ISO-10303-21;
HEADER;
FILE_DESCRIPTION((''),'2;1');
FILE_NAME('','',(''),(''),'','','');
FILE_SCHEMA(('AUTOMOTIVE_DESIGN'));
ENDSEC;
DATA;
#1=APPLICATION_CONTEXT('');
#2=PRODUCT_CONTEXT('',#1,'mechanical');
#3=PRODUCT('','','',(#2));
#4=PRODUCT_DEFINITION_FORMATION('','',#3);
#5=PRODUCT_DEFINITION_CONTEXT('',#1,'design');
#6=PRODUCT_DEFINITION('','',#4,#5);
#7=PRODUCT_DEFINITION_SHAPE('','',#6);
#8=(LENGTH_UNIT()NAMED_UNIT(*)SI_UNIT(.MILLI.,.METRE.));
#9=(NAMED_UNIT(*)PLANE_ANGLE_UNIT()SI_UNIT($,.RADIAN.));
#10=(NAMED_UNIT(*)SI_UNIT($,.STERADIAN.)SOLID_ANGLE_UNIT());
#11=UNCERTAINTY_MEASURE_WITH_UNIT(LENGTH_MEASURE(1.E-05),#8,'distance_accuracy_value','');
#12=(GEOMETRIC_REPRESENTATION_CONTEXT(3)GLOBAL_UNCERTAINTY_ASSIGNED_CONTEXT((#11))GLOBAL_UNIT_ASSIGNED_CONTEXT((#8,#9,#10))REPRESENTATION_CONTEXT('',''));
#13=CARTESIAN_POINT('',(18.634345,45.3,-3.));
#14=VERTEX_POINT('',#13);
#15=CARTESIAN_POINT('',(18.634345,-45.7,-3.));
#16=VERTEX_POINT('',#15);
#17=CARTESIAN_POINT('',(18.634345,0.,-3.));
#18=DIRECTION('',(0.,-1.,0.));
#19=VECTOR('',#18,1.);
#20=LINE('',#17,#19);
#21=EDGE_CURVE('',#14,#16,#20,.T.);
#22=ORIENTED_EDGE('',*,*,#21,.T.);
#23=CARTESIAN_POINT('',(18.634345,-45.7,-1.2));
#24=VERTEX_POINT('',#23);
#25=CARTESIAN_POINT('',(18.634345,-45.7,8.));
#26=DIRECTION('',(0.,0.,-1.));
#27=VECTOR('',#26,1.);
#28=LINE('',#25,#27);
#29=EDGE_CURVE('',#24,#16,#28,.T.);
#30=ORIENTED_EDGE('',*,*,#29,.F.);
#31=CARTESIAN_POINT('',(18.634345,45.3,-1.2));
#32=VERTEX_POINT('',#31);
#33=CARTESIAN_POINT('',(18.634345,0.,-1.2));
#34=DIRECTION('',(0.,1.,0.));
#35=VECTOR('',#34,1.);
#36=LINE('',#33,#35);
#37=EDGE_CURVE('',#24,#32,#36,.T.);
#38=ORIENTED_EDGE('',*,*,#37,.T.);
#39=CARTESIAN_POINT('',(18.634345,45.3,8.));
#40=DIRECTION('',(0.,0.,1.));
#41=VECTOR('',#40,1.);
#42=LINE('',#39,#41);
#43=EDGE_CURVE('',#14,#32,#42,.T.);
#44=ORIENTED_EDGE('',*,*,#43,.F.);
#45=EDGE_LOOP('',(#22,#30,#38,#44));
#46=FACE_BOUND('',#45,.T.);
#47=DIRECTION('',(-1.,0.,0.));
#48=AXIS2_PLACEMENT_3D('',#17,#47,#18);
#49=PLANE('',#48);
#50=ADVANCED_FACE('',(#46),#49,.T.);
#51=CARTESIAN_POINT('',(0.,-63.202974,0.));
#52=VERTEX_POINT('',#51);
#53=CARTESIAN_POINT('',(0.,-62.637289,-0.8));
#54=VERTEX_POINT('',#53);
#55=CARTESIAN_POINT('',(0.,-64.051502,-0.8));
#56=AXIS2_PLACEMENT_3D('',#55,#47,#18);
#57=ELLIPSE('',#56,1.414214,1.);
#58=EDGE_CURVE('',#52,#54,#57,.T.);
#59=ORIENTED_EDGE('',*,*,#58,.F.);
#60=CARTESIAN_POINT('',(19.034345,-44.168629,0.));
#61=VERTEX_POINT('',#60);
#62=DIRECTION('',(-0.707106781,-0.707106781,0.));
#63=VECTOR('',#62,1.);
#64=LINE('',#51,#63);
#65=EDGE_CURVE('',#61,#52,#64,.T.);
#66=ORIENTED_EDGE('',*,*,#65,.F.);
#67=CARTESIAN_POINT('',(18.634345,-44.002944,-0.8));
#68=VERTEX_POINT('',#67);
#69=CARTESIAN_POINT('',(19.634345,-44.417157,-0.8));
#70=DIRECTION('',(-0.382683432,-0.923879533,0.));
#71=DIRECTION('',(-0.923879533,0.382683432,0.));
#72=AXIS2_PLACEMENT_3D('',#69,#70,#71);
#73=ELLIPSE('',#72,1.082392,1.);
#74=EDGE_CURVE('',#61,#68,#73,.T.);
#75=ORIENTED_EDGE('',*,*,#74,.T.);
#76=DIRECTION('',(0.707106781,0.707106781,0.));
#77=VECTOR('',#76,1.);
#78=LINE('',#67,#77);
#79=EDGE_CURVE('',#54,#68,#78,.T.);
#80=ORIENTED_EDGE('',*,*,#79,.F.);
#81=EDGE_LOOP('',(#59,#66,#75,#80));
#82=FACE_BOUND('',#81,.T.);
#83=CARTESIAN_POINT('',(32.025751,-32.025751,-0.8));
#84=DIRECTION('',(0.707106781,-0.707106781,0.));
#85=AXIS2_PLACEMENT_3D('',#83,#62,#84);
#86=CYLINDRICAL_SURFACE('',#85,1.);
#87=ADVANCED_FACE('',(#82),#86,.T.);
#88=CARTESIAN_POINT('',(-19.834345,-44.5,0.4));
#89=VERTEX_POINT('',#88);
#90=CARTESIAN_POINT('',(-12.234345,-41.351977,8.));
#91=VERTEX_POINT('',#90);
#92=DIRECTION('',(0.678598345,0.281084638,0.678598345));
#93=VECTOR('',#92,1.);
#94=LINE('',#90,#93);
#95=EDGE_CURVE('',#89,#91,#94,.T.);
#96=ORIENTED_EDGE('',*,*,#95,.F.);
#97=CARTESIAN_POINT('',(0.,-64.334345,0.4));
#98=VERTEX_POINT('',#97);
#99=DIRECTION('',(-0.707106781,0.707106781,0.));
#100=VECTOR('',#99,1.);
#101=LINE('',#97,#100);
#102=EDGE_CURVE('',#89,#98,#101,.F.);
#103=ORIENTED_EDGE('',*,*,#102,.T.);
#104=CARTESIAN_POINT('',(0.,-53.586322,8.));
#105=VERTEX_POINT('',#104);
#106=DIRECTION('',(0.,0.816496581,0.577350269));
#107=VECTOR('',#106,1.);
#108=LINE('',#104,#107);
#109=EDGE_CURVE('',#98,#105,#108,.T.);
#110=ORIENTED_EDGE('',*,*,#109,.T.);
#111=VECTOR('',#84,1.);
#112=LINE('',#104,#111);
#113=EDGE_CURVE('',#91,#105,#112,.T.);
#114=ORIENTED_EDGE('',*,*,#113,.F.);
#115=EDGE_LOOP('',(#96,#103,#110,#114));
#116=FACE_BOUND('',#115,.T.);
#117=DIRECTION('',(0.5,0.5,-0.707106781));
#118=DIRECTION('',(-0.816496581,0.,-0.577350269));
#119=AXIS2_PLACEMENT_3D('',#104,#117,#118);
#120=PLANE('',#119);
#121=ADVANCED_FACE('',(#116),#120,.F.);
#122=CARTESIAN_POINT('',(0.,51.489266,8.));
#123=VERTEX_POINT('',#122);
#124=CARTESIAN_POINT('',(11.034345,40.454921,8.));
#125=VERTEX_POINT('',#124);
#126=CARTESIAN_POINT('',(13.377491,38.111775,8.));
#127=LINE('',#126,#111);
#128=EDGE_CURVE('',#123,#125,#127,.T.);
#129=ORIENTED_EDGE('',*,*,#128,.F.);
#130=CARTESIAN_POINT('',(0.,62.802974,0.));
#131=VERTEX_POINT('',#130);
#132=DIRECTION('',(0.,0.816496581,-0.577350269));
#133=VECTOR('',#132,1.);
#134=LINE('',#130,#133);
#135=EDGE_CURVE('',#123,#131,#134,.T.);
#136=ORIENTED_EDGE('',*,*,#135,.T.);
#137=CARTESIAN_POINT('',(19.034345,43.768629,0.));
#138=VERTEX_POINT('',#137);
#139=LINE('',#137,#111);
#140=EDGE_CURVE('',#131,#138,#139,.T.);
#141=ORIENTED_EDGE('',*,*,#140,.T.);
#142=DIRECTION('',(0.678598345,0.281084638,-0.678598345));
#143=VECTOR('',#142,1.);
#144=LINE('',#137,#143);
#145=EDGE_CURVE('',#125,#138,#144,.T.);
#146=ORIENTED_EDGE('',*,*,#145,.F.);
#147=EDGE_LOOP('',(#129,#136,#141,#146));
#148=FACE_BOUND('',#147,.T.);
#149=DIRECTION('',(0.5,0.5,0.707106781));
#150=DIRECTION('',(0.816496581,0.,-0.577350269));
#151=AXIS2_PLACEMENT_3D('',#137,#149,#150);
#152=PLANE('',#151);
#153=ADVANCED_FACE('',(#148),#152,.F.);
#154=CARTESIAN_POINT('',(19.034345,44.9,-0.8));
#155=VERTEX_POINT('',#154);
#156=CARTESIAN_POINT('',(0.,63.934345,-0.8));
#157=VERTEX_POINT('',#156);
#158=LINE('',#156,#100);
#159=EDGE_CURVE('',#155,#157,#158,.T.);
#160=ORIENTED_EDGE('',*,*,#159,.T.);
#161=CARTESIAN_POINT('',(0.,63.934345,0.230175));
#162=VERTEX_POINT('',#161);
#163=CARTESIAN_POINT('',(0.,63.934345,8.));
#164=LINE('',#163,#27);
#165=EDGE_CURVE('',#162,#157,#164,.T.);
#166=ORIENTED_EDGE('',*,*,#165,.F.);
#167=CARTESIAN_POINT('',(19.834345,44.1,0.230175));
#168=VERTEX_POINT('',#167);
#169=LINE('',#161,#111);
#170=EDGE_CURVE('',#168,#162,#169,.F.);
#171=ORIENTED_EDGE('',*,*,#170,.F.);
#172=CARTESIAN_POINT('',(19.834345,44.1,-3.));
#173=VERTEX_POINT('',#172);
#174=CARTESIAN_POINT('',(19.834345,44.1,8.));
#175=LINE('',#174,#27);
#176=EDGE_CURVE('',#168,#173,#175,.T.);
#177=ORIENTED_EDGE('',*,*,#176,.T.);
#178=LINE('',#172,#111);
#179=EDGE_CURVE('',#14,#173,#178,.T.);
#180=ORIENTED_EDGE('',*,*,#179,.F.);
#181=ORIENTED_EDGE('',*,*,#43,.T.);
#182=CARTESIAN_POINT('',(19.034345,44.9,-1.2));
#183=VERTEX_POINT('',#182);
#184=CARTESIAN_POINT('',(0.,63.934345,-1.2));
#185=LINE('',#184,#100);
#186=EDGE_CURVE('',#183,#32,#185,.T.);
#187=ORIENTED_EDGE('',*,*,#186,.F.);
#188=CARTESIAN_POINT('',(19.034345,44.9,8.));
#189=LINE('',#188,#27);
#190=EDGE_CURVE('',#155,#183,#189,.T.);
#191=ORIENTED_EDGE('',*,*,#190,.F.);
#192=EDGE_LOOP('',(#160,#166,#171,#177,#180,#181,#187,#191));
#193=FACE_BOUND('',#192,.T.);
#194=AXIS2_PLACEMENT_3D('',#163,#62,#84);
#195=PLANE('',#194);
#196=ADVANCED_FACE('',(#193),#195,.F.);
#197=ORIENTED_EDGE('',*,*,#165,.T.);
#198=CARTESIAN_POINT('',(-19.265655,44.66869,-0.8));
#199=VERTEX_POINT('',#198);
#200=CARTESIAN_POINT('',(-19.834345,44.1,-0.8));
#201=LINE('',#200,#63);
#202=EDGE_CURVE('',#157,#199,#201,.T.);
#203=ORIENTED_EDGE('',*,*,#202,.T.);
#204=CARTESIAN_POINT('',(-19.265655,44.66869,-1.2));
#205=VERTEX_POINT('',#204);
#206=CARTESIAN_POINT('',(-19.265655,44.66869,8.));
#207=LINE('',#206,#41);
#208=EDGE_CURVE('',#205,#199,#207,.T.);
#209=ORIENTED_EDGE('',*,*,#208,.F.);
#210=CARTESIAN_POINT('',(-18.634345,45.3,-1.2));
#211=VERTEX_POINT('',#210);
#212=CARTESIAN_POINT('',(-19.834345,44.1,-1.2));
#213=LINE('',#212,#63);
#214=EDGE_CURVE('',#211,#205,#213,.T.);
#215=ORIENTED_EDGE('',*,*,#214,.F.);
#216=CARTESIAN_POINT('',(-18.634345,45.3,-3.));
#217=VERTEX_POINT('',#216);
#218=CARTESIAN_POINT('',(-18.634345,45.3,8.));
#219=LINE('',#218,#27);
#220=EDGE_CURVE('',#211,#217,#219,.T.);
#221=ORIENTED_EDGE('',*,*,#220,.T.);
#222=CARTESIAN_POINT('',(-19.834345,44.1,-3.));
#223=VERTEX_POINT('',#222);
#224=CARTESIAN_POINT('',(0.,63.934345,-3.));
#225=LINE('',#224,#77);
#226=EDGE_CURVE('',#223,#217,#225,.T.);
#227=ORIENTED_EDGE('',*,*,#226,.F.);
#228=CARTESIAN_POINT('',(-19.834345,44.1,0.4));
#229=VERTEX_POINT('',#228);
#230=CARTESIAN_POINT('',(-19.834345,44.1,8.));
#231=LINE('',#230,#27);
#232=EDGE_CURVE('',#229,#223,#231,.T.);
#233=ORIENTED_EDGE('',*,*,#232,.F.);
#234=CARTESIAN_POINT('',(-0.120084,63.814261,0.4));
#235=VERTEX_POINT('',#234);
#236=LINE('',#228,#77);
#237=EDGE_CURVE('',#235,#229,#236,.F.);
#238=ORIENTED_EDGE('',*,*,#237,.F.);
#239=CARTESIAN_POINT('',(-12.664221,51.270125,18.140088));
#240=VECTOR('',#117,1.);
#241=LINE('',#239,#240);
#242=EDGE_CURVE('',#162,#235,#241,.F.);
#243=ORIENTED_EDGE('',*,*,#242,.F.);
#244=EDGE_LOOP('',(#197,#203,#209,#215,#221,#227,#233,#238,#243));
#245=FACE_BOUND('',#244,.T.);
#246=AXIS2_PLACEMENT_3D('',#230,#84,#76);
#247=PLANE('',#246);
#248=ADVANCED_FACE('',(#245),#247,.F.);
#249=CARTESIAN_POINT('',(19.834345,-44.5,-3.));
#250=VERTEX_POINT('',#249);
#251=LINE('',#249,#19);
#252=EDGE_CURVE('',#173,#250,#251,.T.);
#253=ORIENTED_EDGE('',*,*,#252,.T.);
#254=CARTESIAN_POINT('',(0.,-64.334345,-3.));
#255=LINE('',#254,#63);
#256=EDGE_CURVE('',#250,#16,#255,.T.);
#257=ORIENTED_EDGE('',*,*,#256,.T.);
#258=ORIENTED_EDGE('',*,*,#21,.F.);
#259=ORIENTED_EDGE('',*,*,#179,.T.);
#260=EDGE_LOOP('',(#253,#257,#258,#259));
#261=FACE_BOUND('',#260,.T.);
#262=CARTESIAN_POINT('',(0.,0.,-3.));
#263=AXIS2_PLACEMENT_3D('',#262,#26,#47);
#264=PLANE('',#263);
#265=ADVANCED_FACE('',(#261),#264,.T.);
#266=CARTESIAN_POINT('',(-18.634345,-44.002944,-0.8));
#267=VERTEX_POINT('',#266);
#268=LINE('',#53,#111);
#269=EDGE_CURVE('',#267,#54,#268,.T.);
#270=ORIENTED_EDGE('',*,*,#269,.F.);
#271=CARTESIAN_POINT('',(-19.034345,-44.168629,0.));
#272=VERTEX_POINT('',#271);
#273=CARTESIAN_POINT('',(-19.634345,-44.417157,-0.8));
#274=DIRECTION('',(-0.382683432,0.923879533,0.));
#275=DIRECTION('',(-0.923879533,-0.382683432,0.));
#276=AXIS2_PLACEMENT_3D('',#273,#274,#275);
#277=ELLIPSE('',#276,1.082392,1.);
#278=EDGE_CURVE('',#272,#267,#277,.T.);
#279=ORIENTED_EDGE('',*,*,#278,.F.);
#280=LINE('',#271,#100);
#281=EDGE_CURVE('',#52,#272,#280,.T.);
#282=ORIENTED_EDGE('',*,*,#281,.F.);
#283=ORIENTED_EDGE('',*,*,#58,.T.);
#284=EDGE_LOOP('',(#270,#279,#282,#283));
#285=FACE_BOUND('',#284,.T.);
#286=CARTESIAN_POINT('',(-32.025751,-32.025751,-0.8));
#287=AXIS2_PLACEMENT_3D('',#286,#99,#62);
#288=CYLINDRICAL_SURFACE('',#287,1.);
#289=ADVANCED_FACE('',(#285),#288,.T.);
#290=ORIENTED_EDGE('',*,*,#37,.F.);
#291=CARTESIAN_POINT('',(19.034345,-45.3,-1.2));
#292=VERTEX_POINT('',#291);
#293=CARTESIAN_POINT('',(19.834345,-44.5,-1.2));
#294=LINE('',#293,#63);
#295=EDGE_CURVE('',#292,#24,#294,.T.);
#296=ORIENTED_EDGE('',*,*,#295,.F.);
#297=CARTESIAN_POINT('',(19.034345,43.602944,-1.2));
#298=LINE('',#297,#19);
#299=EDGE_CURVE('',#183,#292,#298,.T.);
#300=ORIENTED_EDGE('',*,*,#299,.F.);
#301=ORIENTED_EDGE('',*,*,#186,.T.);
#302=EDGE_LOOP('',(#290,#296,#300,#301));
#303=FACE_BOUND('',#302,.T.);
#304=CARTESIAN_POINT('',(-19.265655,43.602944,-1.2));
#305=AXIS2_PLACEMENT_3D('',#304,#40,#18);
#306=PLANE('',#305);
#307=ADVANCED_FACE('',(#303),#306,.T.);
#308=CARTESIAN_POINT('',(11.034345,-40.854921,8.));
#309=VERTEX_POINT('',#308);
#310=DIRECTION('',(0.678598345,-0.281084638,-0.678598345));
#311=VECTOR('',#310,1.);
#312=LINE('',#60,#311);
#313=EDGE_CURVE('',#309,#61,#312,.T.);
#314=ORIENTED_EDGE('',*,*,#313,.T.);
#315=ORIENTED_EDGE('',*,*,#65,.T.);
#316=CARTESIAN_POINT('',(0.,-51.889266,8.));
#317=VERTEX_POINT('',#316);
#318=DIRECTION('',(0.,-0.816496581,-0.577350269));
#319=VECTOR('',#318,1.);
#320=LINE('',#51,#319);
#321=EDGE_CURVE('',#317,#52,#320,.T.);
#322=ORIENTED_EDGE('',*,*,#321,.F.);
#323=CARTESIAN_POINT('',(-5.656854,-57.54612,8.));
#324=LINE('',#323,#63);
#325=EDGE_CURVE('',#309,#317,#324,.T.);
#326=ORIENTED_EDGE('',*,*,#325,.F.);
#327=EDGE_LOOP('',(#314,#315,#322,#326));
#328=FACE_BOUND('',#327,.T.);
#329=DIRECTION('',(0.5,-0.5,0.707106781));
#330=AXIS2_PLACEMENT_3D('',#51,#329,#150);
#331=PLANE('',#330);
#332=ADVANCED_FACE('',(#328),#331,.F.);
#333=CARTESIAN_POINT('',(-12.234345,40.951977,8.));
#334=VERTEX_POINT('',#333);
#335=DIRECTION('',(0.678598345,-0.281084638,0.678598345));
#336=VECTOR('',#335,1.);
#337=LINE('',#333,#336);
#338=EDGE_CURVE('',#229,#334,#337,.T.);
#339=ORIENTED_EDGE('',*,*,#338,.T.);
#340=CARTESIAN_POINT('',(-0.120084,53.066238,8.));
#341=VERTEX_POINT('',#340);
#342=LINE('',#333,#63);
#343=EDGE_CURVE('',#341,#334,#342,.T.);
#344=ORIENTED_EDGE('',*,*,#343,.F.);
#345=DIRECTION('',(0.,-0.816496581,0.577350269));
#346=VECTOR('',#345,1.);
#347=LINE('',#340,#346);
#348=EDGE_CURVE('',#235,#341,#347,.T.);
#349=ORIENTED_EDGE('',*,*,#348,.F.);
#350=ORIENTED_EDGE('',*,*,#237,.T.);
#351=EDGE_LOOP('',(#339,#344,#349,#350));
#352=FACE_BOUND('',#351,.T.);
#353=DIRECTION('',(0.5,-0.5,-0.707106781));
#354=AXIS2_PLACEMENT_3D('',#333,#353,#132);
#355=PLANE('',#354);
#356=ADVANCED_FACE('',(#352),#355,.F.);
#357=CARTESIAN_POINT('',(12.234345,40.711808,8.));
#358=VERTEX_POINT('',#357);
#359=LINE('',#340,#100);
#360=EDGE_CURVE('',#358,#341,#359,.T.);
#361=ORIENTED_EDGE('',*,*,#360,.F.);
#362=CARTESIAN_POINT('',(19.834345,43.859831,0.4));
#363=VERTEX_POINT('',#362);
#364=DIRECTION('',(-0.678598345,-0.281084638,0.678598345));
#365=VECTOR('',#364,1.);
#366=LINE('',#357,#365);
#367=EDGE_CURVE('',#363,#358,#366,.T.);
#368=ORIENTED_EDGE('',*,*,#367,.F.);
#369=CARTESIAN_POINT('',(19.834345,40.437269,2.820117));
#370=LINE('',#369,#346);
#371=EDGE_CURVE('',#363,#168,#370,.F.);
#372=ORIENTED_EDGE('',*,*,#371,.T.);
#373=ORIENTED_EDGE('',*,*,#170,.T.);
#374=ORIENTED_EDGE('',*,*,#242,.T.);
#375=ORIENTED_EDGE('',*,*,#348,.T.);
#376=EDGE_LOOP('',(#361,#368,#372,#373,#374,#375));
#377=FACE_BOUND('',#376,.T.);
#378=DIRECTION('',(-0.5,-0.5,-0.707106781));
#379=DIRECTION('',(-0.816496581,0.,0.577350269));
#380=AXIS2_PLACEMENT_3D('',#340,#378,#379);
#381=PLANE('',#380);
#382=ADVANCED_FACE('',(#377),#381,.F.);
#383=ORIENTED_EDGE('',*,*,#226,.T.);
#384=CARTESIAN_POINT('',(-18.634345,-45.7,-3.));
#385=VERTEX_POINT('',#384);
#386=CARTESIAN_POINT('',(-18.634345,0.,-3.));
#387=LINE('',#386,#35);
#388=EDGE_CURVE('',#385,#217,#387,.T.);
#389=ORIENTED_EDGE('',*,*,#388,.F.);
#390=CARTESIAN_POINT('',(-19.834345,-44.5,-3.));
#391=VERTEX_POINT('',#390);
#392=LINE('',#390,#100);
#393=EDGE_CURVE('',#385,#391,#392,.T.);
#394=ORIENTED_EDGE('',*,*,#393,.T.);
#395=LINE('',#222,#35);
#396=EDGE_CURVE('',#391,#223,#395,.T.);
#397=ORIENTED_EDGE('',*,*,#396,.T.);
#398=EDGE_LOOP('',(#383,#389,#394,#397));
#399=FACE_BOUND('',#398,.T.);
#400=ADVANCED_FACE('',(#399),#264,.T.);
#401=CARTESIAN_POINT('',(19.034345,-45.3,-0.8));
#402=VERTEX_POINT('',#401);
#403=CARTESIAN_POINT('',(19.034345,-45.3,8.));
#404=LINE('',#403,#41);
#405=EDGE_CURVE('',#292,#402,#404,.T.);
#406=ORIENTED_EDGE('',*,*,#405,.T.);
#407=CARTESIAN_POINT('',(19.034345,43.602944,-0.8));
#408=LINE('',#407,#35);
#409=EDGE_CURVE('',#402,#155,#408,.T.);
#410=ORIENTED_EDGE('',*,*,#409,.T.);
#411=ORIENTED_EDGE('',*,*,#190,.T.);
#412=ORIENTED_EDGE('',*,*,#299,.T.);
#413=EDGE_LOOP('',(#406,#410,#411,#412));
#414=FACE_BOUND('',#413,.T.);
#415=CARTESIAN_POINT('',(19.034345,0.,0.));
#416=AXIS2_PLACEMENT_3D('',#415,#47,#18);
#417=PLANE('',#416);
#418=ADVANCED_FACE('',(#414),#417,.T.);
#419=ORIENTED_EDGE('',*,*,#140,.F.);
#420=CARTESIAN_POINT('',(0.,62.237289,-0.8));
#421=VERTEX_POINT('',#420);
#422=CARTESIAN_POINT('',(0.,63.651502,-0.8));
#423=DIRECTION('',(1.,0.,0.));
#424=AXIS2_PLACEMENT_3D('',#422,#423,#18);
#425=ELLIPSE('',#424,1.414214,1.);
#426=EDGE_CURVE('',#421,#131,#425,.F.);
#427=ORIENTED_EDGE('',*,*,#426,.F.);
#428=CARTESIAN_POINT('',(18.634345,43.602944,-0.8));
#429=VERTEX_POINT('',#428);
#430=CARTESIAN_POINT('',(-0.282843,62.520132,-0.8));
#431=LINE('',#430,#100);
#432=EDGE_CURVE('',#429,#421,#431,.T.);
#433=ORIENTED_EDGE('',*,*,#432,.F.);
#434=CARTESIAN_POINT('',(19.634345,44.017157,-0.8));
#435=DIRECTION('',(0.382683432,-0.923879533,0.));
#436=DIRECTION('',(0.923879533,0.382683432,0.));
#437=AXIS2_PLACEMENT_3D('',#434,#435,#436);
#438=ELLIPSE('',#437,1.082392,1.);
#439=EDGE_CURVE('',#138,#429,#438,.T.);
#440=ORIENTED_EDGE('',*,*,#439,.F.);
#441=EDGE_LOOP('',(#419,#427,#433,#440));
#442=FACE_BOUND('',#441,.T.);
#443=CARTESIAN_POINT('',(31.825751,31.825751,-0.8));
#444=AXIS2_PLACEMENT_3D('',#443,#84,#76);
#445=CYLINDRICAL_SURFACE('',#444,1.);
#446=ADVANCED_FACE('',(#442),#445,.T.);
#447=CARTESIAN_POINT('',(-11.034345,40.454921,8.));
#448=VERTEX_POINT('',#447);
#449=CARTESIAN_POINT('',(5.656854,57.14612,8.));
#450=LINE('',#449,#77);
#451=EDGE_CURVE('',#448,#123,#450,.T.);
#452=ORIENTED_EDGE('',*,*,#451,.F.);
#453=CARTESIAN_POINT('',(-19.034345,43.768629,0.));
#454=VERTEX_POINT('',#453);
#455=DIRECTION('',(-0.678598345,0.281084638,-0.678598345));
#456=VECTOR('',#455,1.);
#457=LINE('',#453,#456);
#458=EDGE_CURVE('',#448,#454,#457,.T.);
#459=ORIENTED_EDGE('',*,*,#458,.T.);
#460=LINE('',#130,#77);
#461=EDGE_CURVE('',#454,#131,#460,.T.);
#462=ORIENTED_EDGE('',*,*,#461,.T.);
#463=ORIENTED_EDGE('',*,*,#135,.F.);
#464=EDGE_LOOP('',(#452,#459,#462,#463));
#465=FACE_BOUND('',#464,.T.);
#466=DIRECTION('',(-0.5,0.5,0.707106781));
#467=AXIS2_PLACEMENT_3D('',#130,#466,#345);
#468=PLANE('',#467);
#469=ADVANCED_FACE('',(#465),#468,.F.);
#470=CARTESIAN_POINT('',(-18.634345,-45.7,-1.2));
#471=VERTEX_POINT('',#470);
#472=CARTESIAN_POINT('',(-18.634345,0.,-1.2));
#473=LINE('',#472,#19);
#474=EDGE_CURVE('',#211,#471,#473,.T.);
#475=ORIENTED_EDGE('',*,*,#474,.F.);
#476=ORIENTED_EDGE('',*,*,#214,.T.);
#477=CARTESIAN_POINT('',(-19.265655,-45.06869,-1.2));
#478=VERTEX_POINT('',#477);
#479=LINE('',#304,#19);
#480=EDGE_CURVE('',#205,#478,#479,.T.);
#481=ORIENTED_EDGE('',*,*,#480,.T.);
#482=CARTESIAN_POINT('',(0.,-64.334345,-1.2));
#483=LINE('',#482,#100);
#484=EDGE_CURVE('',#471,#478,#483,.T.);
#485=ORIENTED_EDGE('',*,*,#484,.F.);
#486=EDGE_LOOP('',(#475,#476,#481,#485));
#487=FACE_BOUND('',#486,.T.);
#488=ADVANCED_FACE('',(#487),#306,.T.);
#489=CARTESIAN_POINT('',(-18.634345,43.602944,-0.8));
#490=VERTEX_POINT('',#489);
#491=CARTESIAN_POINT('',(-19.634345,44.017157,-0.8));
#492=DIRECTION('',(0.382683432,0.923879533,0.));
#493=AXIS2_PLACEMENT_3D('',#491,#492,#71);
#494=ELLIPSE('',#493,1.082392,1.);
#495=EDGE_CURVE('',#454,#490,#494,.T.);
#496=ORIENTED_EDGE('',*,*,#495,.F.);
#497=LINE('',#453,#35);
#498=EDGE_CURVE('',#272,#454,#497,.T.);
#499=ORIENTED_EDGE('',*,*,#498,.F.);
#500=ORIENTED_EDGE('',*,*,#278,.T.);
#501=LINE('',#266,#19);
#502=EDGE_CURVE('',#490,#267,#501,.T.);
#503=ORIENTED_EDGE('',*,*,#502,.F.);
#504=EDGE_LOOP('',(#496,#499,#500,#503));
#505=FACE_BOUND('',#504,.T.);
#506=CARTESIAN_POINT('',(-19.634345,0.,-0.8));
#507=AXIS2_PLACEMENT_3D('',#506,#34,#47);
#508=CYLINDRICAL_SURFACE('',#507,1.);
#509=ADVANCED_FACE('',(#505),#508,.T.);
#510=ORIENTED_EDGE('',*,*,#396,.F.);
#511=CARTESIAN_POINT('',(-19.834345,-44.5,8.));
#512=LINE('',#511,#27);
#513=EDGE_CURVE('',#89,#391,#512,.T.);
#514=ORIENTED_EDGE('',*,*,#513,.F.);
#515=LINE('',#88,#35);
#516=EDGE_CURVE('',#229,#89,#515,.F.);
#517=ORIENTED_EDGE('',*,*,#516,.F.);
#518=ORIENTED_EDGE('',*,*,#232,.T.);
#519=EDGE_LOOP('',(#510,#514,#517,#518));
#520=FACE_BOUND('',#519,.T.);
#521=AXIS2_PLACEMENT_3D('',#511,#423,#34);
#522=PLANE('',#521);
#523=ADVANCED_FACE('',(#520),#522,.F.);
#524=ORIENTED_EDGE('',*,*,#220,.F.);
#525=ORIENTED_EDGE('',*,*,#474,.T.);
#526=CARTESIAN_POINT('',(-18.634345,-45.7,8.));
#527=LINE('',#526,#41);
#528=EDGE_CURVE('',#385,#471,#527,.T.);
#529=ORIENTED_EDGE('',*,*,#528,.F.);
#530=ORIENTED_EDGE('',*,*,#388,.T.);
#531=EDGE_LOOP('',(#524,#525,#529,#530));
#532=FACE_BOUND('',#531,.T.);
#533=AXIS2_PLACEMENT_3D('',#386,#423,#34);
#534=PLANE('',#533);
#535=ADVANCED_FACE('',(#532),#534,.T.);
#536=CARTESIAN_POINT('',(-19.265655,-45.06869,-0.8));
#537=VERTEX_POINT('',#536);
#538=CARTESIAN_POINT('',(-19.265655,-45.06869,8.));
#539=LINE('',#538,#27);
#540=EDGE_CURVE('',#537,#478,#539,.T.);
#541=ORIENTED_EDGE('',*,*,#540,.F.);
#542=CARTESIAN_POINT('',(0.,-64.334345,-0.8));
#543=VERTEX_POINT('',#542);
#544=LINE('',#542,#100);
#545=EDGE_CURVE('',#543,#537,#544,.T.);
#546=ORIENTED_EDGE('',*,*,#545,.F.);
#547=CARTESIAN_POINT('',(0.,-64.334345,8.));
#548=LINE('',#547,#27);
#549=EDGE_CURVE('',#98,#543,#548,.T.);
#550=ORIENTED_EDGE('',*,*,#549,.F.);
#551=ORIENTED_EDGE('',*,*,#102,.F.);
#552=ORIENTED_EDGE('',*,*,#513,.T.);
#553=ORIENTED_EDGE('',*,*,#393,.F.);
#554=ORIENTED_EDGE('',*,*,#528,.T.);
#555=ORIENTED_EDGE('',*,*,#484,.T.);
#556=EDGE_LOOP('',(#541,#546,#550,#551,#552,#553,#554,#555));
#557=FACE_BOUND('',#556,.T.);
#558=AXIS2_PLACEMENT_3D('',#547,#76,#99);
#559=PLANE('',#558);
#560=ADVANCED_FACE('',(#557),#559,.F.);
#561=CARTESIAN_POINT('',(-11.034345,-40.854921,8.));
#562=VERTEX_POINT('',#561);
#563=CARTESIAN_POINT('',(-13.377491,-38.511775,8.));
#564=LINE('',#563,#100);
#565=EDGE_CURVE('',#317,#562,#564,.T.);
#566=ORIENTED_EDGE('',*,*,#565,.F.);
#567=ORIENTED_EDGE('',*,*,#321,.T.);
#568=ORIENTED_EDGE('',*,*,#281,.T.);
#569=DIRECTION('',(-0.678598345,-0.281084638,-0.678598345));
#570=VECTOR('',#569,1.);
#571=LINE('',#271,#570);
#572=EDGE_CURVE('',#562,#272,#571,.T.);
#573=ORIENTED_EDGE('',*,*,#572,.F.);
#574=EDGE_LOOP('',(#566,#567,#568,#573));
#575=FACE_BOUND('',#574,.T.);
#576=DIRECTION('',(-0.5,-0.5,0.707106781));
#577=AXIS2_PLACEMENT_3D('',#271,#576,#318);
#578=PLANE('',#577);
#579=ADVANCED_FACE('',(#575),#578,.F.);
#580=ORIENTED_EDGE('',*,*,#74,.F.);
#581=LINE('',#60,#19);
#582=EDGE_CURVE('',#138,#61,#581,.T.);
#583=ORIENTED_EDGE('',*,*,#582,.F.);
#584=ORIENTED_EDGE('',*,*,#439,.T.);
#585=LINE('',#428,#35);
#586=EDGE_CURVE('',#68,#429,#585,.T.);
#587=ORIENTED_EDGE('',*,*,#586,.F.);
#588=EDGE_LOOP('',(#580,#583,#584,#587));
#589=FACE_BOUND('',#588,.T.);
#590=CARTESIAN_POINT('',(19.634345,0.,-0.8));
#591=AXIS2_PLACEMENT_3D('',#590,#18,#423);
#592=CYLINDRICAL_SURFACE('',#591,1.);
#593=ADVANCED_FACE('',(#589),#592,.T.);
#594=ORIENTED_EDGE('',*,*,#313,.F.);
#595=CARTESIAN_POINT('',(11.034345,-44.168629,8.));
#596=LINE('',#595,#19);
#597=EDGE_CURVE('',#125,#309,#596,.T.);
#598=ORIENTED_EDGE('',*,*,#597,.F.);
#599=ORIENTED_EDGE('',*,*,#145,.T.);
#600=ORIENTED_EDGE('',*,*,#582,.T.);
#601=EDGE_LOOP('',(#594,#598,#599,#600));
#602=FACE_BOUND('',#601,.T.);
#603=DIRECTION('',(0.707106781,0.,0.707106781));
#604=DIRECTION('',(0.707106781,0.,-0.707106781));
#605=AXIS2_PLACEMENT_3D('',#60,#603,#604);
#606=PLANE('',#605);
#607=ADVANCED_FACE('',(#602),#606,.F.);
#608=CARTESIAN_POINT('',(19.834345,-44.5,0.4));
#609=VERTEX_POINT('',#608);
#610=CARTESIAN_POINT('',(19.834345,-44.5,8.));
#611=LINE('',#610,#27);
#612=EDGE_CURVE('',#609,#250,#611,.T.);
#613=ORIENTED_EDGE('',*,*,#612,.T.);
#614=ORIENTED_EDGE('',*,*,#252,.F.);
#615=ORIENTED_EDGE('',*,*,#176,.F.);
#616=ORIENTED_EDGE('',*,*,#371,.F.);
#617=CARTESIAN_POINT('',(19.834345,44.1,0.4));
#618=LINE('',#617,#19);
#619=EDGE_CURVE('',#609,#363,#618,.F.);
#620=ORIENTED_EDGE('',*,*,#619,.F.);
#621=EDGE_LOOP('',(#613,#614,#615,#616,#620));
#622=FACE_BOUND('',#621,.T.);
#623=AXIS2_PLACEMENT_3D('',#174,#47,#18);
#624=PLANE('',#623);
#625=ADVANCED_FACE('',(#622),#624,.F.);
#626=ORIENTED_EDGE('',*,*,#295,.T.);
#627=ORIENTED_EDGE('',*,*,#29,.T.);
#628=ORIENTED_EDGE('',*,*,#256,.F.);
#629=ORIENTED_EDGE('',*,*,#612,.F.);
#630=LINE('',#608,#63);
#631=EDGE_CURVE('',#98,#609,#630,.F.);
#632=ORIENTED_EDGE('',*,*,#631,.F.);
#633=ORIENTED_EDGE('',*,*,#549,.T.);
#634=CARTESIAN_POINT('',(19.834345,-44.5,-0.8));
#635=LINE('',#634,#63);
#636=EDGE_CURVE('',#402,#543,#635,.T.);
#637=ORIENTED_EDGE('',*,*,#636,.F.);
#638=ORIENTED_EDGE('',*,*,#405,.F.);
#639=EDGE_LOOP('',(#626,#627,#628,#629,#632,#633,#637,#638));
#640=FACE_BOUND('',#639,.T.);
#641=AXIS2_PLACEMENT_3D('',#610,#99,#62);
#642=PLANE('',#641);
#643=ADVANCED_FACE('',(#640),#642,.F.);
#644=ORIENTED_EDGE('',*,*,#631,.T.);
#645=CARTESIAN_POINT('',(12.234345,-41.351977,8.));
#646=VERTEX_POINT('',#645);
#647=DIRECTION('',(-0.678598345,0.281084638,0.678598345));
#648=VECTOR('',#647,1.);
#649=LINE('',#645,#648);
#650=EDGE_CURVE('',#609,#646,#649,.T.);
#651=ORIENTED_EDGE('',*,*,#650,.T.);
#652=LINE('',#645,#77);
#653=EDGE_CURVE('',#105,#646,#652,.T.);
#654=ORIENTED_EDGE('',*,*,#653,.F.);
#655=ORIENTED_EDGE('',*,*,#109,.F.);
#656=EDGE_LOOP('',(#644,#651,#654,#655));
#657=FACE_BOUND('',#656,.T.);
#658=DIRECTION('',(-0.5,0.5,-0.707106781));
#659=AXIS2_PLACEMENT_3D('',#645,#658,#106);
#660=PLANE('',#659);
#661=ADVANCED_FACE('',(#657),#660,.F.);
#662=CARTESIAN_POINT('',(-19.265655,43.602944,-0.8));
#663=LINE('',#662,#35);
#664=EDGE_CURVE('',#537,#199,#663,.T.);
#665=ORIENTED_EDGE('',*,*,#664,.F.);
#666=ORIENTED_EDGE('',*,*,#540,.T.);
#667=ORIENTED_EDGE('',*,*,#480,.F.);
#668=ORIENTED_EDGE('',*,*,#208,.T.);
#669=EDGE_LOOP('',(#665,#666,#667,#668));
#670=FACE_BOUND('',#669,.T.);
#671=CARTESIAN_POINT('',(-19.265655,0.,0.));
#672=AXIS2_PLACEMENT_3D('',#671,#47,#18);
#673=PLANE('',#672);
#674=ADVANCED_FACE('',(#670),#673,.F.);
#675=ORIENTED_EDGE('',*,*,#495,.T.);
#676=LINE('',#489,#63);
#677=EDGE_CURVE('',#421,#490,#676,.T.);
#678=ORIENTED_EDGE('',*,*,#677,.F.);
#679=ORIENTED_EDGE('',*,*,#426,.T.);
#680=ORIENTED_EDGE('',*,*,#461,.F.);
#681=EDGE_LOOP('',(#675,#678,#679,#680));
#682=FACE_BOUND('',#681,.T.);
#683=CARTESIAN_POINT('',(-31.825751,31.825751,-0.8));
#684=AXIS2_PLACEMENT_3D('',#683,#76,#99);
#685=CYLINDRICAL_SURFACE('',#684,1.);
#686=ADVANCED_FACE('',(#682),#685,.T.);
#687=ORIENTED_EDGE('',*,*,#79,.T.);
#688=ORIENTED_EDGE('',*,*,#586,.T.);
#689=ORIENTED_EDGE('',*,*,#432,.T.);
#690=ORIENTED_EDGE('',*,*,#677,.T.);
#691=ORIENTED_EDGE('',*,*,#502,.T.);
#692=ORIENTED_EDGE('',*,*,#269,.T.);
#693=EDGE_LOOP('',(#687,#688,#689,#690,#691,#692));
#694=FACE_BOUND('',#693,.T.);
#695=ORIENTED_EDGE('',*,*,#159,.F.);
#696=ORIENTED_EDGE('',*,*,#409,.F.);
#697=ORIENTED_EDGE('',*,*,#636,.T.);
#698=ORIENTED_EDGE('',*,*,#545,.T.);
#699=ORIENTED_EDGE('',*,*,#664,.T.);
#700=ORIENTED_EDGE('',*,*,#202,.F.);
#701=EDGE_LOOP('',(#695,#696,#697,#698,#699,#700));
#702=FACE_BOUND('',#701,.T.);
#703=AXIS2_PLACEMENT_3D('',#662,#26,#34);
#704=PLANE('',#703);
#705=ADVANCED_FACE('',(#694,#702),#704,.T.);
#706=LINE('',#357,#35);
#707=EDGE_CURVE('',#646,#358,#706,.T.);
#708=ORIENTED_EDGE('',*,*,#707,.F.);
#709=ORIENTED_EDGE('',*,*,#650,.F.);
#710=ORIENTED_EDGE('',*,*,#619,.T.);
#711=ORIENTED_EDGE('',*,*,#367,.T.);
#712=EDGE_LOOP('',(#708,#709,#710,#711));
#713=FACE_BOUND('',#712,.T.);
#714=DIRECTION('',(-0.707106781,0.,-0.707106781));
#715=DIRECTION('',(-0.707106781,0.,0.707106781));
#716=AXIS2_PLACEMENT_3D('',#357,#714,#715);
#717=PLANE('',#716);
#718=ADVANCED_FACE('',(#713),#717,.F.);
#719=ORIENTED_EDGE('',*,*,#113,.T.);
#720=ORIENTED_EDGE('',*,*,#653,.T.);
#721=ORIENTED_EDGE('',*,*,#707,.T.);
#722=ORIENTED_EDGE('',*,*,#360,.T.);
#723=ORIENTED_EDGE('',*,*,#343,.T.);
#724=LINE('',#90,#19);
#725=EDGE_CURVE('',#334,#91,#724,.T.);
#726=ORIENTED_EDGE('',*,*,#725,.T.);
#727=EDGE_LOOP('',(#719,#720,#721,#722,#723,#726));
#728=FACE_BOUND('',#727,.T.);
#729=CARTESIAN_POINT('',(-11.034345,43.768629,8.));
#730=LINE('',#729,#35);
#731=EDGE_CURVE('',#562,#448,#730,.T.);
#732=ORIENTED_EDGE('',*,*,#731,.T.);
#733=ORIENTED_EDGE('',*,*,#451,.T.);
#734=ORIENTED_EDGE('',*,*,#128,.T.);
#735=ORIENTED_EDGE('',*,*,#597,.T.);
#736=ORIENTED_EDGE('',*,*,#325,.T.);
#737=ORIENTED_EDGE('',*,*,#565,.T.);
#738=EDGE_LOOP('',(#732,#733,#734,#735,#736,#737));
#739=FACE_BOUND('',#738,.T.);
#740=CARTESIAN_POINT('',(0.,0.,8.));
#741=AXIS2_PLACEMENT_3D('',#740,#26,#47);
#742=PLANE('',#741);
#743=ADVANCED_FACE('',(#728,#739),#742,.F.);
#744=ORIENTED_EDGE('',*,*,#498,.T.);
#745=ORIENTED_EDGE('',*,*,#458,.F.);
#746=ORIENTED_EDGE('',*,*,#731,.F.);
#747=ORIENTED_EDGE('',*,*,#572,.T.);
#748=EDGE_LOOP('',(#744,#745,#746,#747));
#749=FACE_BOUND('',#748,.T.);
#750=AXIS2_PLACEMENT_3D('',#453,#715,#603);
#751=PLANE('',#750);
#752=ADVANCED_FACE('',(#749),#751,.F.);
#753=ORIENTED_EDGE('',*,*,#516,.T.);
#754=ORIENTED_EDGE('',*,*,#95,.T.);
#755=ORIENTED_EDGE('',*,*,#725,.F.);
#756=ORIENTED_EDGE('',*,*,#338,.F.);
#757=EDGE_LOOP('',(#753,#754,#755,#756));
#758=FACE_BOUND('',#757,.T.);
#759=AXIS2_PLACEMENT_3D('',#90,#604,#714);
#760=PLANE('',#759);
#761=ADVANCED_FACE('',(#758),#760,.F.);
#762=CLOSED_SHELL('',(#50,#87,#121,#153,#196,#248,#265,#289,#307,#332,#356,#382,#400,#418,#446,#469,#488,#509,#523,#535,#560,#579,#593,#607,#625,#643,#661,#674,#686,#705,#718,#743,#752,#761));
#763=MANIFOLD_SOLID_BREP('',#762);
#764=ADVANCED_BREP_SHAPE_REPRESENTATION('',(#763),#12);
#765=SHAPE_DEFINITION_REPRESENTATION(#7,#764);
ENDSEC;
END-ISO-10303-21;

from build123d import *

# Parameters (mm, degrees)
EXTRUDE_2_DEPTH          = 8
CUT_EXTRUDE_1_DEPTH      = 8
CUT_EXTRUDE_1_DRAFT      = -45
SKETCH_3_OUTSIDE_W       = 84.568
SKETCH_3_OUTSIDE_H       = 173.168
CUT_EXTRUDE_5_DEPTH      = 8
CUT_EXTRUDE_5_DRAFT      = -45
EXTRUDE_1_DEPTH          = 3
FILLET_1_R               = 1
FILLET_2_R               = 1
CUT_EXTRUDE_6_DEPTH      = 37.9
CUT_EXTRUDE_6_DEPTH_BACK = 0.4
SKETCH_5_W               = 0.4
SKETCH_5_H               = 87.60588745
SKETCH_7_W               = 38.3
SKETCH_7_H               = 22.901916238
CUT_EXTRUDE_8_DEPTH      = 0.4
SKETCH_8_W               = 38.3
SKETCH_8_H               = 25.571304525
CUT_EXTRUDE_9_DEPTH      = 0.4
SKETCH_9_W               = 37.268690424
SKETCH_9_H               = 136.16118074
CUT_EXTRUDE_10_DEPTH     = 1.8


with BuildPart() as part:
    # Skizze1 → Бобышка-Вытянуть2 (new body)
    with BuildSketch(Plane.XY):
        Polygon((-19.834345212, 44.1), (0, 63.934345212), (19.834345212, 44.1), (19.834345212, -44.5), (0, -64.334345212), (-19.834345212, -44.5), align=None)
    extrude(amount=EXTRUDE_2_DEPTH)


with BuildPart() as cut_extrude_1_tool:
    # Эскиз1 → Вырез-Вытянуть1 (with draft: the straight prism first)
    with BuildSketch(Plane(origin=(0, 0, 0), x_dir=(-1, 0, 0), z_dir=(0, 0, -1))):
        Polygon((0, 62.802974362), (-19.034345212, 43.76862915), (-19.034345212, -44.16862915), (0, -63.202974362), (19.034345212, -44.16862915), (19.034345212, 43.76862915), align=None)
    extrude(amount=-CUT_EXTRUDE_1_DEPTH)
    # Вырез-Вытянуть1: the draft: its side faces are tilted about the plane it starts from
    cut_extrude_1_sides = [cut_extrude_1_tool.faces().sort_by_distance(p)[0] for p in [
        (9.517172606, 53.285801756, 4),
        (19.034345212, -0.2, 4),
        (9.517172606, -53.685801756, 4),
        (-9.517172606, -53.685801756, 4),
        (-19.034345212, -0.2, 4),
        (-9.517172606, 53.285801756, 4),
    ]]
    draft(cut_extrude_1_sides, Plane(origin=(0, 0, 0), x_dir=(-1, 0, 0), z_dir=(0, 0, -1)), CUT_EXTRUDE_1_DRAFT)


with BuildPart() as part_1:
    add(part.part)

    # Вырез-Вытянуть1: cut by cut_extrude_1_tool
    add(cut_extrude_1_tool.part, mode=Mode.SUBTRACT)


with BuildPart() as cut_extrude_5_tool:
    # Эскиз3 outside → Вырез-Вытянуть5 (with draft: the straight prism first)
    with BuildSketch(Plane.XY.offset(8)):
        with Locations((0, -0.2)):
            Rectangle(SKETCH_3_OUTSIDE_W, SKETCH_3_OUTSIDE_H)
        Polygon((-12.234345212, 40.951976926), (-12.234345212, -41.351976926), (0, -53.586322138), (12.234345212, -41.351976926), (12.234345212, 40.711808204), (-0.120084361, 53.066237777), align=None, mode=Mode.SUBTRACT)
    extrude(amount=-CUT_EXTRUDE_5_DEPTH)
    # Вырез-Вытянуть5: the draft: its side faces are tilted about the plane it starts from
    cut_extrude_5_sides = [cut_extrude_5_tool.faces().sort_by_distance(p)[0] for p in [
        (0, -86.784, 4),
        (42.284, -0.2, 4),
        (0, 86.384, 4),
        (-42.284, -0.2, 4),
        (-6.177214787, 47.009107352, 4),
        (6.057130426, 46.889022991, 4),
        (12.234345212, -0.320084361, 4),
        (6.117172606, -47.469149532, 4),
        (-6.117172606, -47.469149532, 4),
        (-12.234345212, -0.2, 4),
    ]]
    draft(cut_extrude_5_sides, Plane.XY.offset(8), CUT_EXTRUDE_5_DRAFT)


with BuildPart() as part_2:
    add(part_1.part)

    # Вырез-Вытянуть5: cut by cut_extrude_5_tool
    add(cut_extrude_5_tool.part, mode=Mode.SUBTRACT)

    # Эскиз4 → Вытянуть-Тонкостенный1 (add)
    with BuildSketch(Plane(origin=(0, 0, 0), x_dir=(-1, 0, 0), z_dir=(0, 0, -1))):
        Polygon((19.834345212, 44.1), (19.834345212, -44.5), (0, -64.334345212), (-19.834345212, -44.5), (-19.834345212, 44.1), (0, 63.934345212), align=None)
        Polygon((18.634345212, 43.602943725), (18.634345212, -44.002943725), (0, -62.637288937), (-18.634345212, -44.002943725), (-18.634345212, 43.602943725), (0, 62.237288937), align=None, mode=Mode.SUBTRACT)
    extrude(amount=EXTRUDE_1_DEPTH)

    # Скругление1
    # the kernel refuses this fillet: 1 mm, written as the material it takes off along each edge
    with BuildSketch(Plane(origin=(-18.634345212, 45.602943725, 0), x_dir=(-1, 0, 0), z_dir=(0, -1, 0))) as fillet_1_piece_1_section:
        with BuildLine():
            CenterArc((1, 0.8), FILLET_1_R, 180, 53.130102354)
            Line((0, 0.8), (-0.02, 0.8))
            Line((-0.02, 0.8), (-0.02, 0))
            Line((-0.02, 0), (0, -0.02))
            ThreePointArc((0, -0.02), (0.2, -0.02), (0.388, -0.016))
            Line((0.388, -0.016), (0.4, 0))
        make_face()
    fillet_1_piece_1 = extrude(amount=91.60588745, mode=Mode.PRIVATE)
    fillet_1_piece_1 = split(fillet_1_piece_1, bisect_by=Plane(origin=(-18.834345212, 45.602943725, 0.2), z_dir=(0.7071067811865462, 0, -0.7071067811865488)), keep=Keep.TOP, mode=Mode.PRIVATE)
    fillet_1_piece_1 = split(fillet_1_piece_1, bisect_by=Plane(origin=(-63.437288937, 0.8, 0), z_dir=(0.7071067811865476, 0.7071067811865476, 0)), keep=Keep.TOP, mode=Mode.PRIVATE)
    fillet_1_piece_1 = split(fillet_1_piece_1, bisect_by=Plane(origin=(-17.634345212, 44.602943725, 0), z_dir=(0.7071067811865469, -0.7071067811865481, 0)), keep=Keep.TOP, mode=Mode.PRIVATE)
    add(fillet_1_piece_1, mode=Mode.SUBTRACT)
    with BuildSketch(Plane(origin=(0, 62.237288937, 0), x_dir=(-0.7071067811865469, 0.7071067811865482, 0), z_dir=(-0.7071067811865481, -0.7071067811865469, 0))) as fillet_1_piece_2_section:
        with BuildLine():
            CenterArc((1, 0.8), FILLET_1_R, 180, 53.130102354)
            Line((0, 0.8), (-0.02, 0.8))
            Line((-0.02, 0.8), (-0.02, 0))
            Line((-0.02, 0), (0, -0.02))
            ThreePointArc((0, -0.02), (0.2, -0.02), (0.388, -0.016))
            Line((0.388, -0.016), (0.4, 0))
        make_face()
    fillet_1_piece_2 = extrude(amount=28.352943725, mode=Mode.PRIVATE)
    fillet_1_piece_2 = split(fillet_1_piece_2, bisect_by=Plane(origin=(-0.141421356, 62.378710294, 0.2), z_dir=(0.499999999999999, -0.4999999999999993, -0.7071067811865488)), keep=Keep.TOP, mode=Mode.PRIVATE)
    fillet_1_piece_2 = split(fillet_1_piece_2, bisect_by=Plane(origin=(-18.634345212, 62.237288937, 0), z_dir=(1, 0, 0)), keep=Keep.TOP, mode=Mode.PRIVATE)
    add(fillet_1_piece_2, mode=Mode.SUBTRACT)
    with BuildSketch(Plane(origin=(0, 62.237288937, 0), x_dir=(-0.7071067811865469, 0.7071067811865482, 0), z_dir=(-0.7071067811865481, -0.7071067811865469, 0))) as fillet_1_piece_3a_section:
        with BuildLine():
            CenterArc((1, 0.8), FILLET_1_R, 180, 53.130102354)
            Line((0, 0.8), (-0.02, 0.8))
            Line((-0.02, 0.8), (-0.02, 0))
            Line((-0.02, 0), (0, -0.02))
            ThreePointArc((0, -0.02), (0.2, -0.02), (0.388, -0.016))
            Line((0.388, -0.016), (0.4, 0))
        make_face()
    fillet_1_piece_3a = extrude(amount=28.352943725, mode=Mode.PRIVATE)
    fillet_1_piece_3a = split(fillet_1_piece_3a, bisect_by=Plane(origin=(-9.517172606, 62.237288937, 9.517172606), z_dir=(0.7071067811865462, 0, -0.7071067811865488)), keep=Keep.TOP, mode=Mode.PRIVATE)
    fillet_1_piece_3a = split(fillet_1_piece_3a, bisect_by=Plane(origin=(-0.141421356, 62.378710294, 0.2), z_dir=(0.499999999999999, -0.4999999999999993, -0.7071067811865488)), keep=Keep.TOP, mode=Mode.PRIVATE)
    fillet_1_piece_3a = split(fillet_1_piece_3a, bisect_by=Plane(origin=(-18.634345212, 62.237288937, 0), z_dir=(-1, 0, 0)), keep=Keep.TOP, mode=Mode.PRIVATE)
    with BuildSketch(Plane(origin=(-18.634345212, 45.602943725, 0), x_dir=(-1, 0, 0), z_dir=(0, -1, 0))) as fillet_1_piece_3b_section:
        with BuildLine():
            CenterArc((1, 0.8), FILLET_1_R, 180, 53.130102354)
            Line((0, 0.8), (-0.02, 0.8))
            Line((-0.02, 0.8), (-0.02, 0))
            Line((-0.02, 0), (0, -0.02))
            ThreePointArc((0, -0.02), (0.2, -0.02), (0.388, -0.016))
            Line((0.388, -0.016), (0.4, 0))
        make_face()
    fillet_1_piece_3b = extrude(amount=91.60588745, mode=Mode.PRIVATE)
    fillet_1_piece_3b = split(fillet_1_piece_3b, bisect_by=Plane(origin=(-18.834345212, 45.602943725, 0.2), z_dir=(0.7071067811865462, 0, -0.7071067811865488)), keep=Keep.TOP, mode=Mode.PRIVATE)
    fillet_1_piece_3b = split(fillet_1_piece_3b, bisect_by=Plane(origin=(-18.275766569, 45.244365081, -0.507106781), z_dir=(0.499999999999999, -0.4999999999999993, -0.7071067811865488)), keep=Keep.TOP, mode=Mode.PRIVATE)
    fillet_1_piece_3b = split(fillet_1_piece_3b, bisect_by=Plane(origin=(-17.634345212, 44.602943725, 0), z_dir=(-0.7071067811865469, 0.7071067811865481, 0)), keep=Keep.TOP, mode=Mode.PRIVATE)
    fillet_1_piece_3 = fillet_1_piece_3a & fillet_1_piece_3b
    add(fillet_1_piece_3, mode=Mode.SUBTRACT)

    # Скругление2
    # the kernel refuses this fillet: 1 mm, written as the material it takes off along each edge
    with BuildSketch(Plane(origin=(-20.802112165, -41.835176772, 0), x_dir=(-0.7071067811865467, -0.7071067811865485, -2.6367796834847523e-15), z_dir=(0.7071067811865485, -0.7071067811865466, 0))) as fillet_2_piece_1_section:
        with BuildLine():
            CenterArc((FILLET_2_R, FILLET_2_R), FILLET_2_R, 180, 90)
            Line((0, FILLET_2_R), (0, 0))
            Line((0, 0), (FILLET_2_R, 0))
        make_face()
    fillet_2_piece_1 = extrude(amount=2.899999894, mode=Mode.PRIVATE)
    fillet_2_piece_1 = fillet_2_piece_1 - Plane(origin=(-19.634345212, -41.835176772, -0.8), x_dir=(-1, 0, 0), z_dir=(0, 1, 0)) * Cylinder(1, 10, mode=Mode.PRIVATE)
    add(fillet_2_piece_1, mode=Mode.SUBTRACT)
    with BuildSketch(Plane(origin=(-18.751502574, -43.885786363, 0), x_dir=(-0.7071067811865466, -0.7071067811865485, -1.909421767788959e-14), z_dir=(0.7071067811865485, -0.7071067811865466, 0))) as fillet_2_piece_2_section:
        with BuildLine():
            CenterArc((1, 0.8), FILLET_2_R, 180, 53.130102354)
            Line((0, 0.8), (0, 0))
            Line((0, 0), (0.4, 0))
        make_face()
    fillet_2_piece_2 = extrude(amount=26.518629256, mode=Mode.PRIVATE)
    fillet_2_piece_2 = fillet_2_piece_2 - Plane(origin=(-19.634345212, -43.885786363, -0.8), x_dir=(-1, 0, 0), z_dir=(0, 1, 0)) * Cylinder(1, 57, mode=Mode.PRIVATE)
    add(fillet_2_piece_2, mode=Mode.SUBTRACT)
    with BuildSketch(Plane(origin=(0, -62.637288937, 0), x_dir=(0.7071067811865472, -0.7071067811865478, 0), z_dir=(0.7071067811865479, 0.7071067811865474, 0))) as fillet_2_piece_3_section:
        with BuildLine():
            CenterArc((1, 0.8), FILLET_2_R, 180, 53.130102354)
            Line((0, 0.8), (0, 0))
            Line((0, 0), (0.4, 0))
        make_face()
    fillet_2_piece_3 = extrude(amount=28.352943725, mode=Mode.PRIVATE)
    fillet_2_piece_3 = split(fillet_2_piece_3, bisect_by=Plane(origin=(18.634345212, -62.637288937, 0), z_dir=(-1, 0, 0)), keep=Keep.TOP, mode=Mode.PRIVATE)
    add(fillet_2_piece_3, mode=Mode.SUBTRACT)
    with BuildSketch(Plane(origin=(18.634345212, -46.002943725, 0), x_dir=(1, 0, 0), z_dir=(0, 1, 0))) as fillet_2_piece_4_section:
        with BuildLine():
            CenterArc((1, 0.8), FILLET_2_R, 180, 53.130102354)
            Line((0, 0.8), (0, 0))
            Line((0, 0), (0.4, 0))
        make_face()
    fillet_2_piece_4 = extrude(amount=91.60588745, mode=Mode.PRIVATE)
    fillet_2_piece_4 = split(fillet_2_piece_4, bisect_by=Plane(origin=(17.634345212, -45.002943725, 0), z_dir=(-0.7071067811865472, 0.7071067811865478, 0)), keep=Keep.TOP, mode=Mode.PRIVATE)
    fillet_2_piece_4 = split(fillet_2_piece_4, bisect_by=Plane(origin=(63.437288937, -1.2, 0), z_dir=(-0.7071067811865478, -0.7071067811865472, 0)), keep=Keep.TOP, mode=Mode.PRIVATE)
    add(fillet_2_piece_4, mode=Mode.SUBTRACT)
    with BuildSketch(Plane(origin=(20.048558775, 42.188730163, 0), x_dir=(0.7071067811865491, 0.707106781186546, 5.342948306008711e-15), z_dir=(-0.707106781186546, 0.7071067811865491, 0))) as fillet_2_piece_5_section:
        with BuildLine():
            CenterArc((1, 0.8), FILLET_2_R, 180, 53.130102354)
            Line((0, 0.8), (0, 0))
            Line((0, 0), (0.4, 0))
        make_face()
    fillet_2_piece_5 = extrude(amount=30.752943725, mode=Mode.PRIVATE)
    fillet_2_piece_5 = fillet_2_piece_5 - Plane(origin=(-0.707106781, 62.944395719, -0.8), x_dir=(-0.7071067811865476, 0.7071067811865476, 0), z_dir=(0.7071067811865476, 0.7071067811865476, 0)) * Cylinder(1, 65, mode=Mode.PRIVATE)
    fillet_2_piece_5 = split(fillet_2_piece_5, bisect_by=Plane(origin=(18.634345212, 42.188730163, 0), z_dir=(-1, 0, 0)), keep=Keep.TOP, mode=Mode.PRIVATE)
    add(fillet_2_piece_5, mode=Mode.SUBTRACT)
    with BuildSketch(Plane(origin=(-1.414213562, -64.0515025, 0), x_dir=(0.7071067811865472, -0.7071067811865478, 0), z_dir=(0.7071067811865479, 0.7071067811865474, 0))) as fillet_2_piece_6a_section:
        with BuildLine():
            CenterArc((1, 0.8), FILLET_2_R, 180, 53.130102354)
            Line((0, 0.8), (0, 0))
            Line((0, 0), (0.4, 0))
        make_face()
    fillet_2_piece_6a = extrude(amount=30.352943725, mode=Mode.PRIVATE)
    fillet_2_piece_6a = split(fillet_2_piece_6a, bisect_by=Plane(origin=(-0.848528137, -63.485817075, -0.8), z_dir=(0.4999999999999991, 0.4999999999999993, -0.7071067811865489)), keep=Keep.TOP, mode=Mode.PRIVATE)
    fillet_2_piece_6a = split(fillet_2_piece_6a, bisect_by=Plane(origin=(0, -62.637288937, 0), z_dir=(-0.7071067811865476, -0.7071067811865476, 0)), keep=Keep.TOP, mode=Mode.PRIVATE)
    with BuildSketch(Plane(origin=(-18.751502574, -43.885786363, 0), x_dir=(-0.7071067811865466, -0.7071067811865485, -1.909421767788959e-14), z_dir=(0.7071067811865485, -0.7071067811865466, 0))) as fillet_2_piece_6b_section:
        with BuildLine():
            CenterArc((1, 0.8), FILLET_2_R, 180, 53.130102354)
            Line((0, 0.8), (0, 0))
            Line((0, 0), (0.4, 0))
        make_face()
    fillet_2_piece_6b = extrude(amount=28.518629256, mode=Mode.PRIVATE)
    fillet_2_piece_6b = split(fillet_2_piece_6b, bisect_by=Plane(origin=(0, -62.637288937, 0), z_dir=(0.7071067811865472, -0.7071067811865478, 0)), keep=Keep.TOP, mode=Mode.PRIVATE)
    fillet_2_piece_6b = split(fillet_2_piece_6b, bisect_by=Plane(origin=(-9.234329931, -53.402959006, 13.459314628), z_dir=(-0.4999999999999991, 0.4999999999999991, -0.7071067811865488)), keep=Keep.TOP, mode=Mode.PRIVATE)
    fillet_2_piece_6 = fillet_2_piece_6a & fillet_2_piece_6b
    add(fillet_2_piece_6, mode=Mode.SUBTRACT)
    with BuildSketch(Plane(origin=(18.634345212, -46.002943725, 0), x_dir=(1, 0, 0), z_dir=(0, 1, 0))) as fillet_2_piece_7a_section:
        with BuildLine():
            CenterArc((1, 0.8), FILLET_2_R, 180, 53.130102354)
            Line((0, 0.8), (0, 0))
            Line((0, 0), (0.4, 0))
        make_face()
    fillet_2_piece_7a = extrude(amount=91.60588745, mode=Mode.PRIVATE)
    fillet_2_piece_7a = split(fillet_2_piece_7a, bisect_by=Plane(origin=(17.634345212, -45.002943725, 0), z_dir=(0.7071067811865472, -0.7071067811865478, 0)), keep=Keep.TOP, mode=Mode.PRIVATE)
    fillet_2_piece_7a = split(fillet_2_piece_7a, bisect_by=Plane(origin=(18.275766569, -45.644365081, -0.507106781), z_dir=(-0.4999999999999991, 0.4999999999999991, -0.7071067811865488)), keep=Keep.TOP, mode=Mode.PRIVATE)
    with BuildSketch(Plane(origin=(0, -62.637288937, 0), x_dir=(0.7071067811865472, -0.7071067811865478, 0), z_dir=(0.7071067811865479, 0.7071067811865474, 0))) as fillet_2_piece_7b_section:
        with BuildLine():
            CenterArc((1, 0.8), FILLET_2_R, 180, 53.130102354)
            Line((0, 0.8), (0, 0))
            Line((0, 0), (0.4, 0))
        make_face()
    fillet_2_piece_7b = extrude(amount=28.352943725, mode=Mode.PRIVATE)
    fillet_2_piece_7b = split(fillet_2_piece_7b, bisect_by=Plane(origin=(18.634345212, -62.637288937, 0), z_dir=(1, 0, 0)), keep=Keep.TOP, mode=Mode.PRIVATE)
    fillet_2_piece_7b = split(fillet_2_piece_7b, bisect_by=Plane(origin=(9.517172606, -62.637288937, 9.517172606), z_dir=(-0.7071067811865462, 0, -0.7071067811865488)), keep=Keep.TOP, mode=Mode.PRIVATE)
    fillet_2_piece_7 = fillet_2_piece_7a & fillet_2_piece_7b
    add(fillet_2_piece_7, mode=Mode.SUBTRACT)
    with BuildSketch(Plane(origin=(20.048558775, 42.188730163, 0), x_dir=(0.7071067811865491, 0.707106781186546, 5.342948306008711e-15), z_dir=(-0.707106781186546, 0.7071067811865491, 0))) as fillet_2_piece_8a_section:
        with BuildLine():
            CenterArc((1, 0.8), FILLET_2_R, 180, 53.130102354)
            Line((0, 0.8), (0, 0))
            Line((0, 0), (0.4, 0))
        make_face()
    fillet_2_piece_8a = extrude(amount=30.752943725, mode=Mode.PRIVATE)
    fillet_2_piece_8a = split(fillet_2_piece_8a, bisect_by=Plane(origin=(18.634345212, 42.188730163, 0), z_dir=(1, 0, 0)), keep=Keep.TOP, mode=Mode.PRIVATE)
    fillet_2_piece_8a = split(fillet_2_piece_8a, bisect_by=Plane(origin=(19.541451993, 42.188730163, -0.507106781), z_dir=(-0.7071067811865462, 0, -0.7071067811865488)), keep=Keep.TOP, mode=Mode.PRIVATE)
    with BuildSketch(Plane(origin=(18.634345212, -46.002943725, 0), x_dir=(1, 0, 0), z_dir=(0, 1, 0))) as fillet_2_piece_8b_section:
        with BuildLine():
            CenterArc((1, 0.8), FILLET_2_R, 180, 53.130102354)
            Line((0, 0.8), (0, 0))
            Line((0, 0), (0.4, 0))
        make_face()
    fillet_2_piece_8b = extrude(amount=91.60588745, mode=Mode.PRIVATE)
    fillet_2_piece_8b = split(fillet_2_piece_8b, bisect_by=Plane(origin=(63.437288937, -1.2, 0), z_dir=(0.7071067811865478, 0.7071067811865472, 0)), keep=Keep.TOP, mode=Mode.PRIVATE)
    fillet_2_piece_8b = split(fillet_2_piece_8b, bisect_by=Plane(origin=(41.177238431, -23.460050506, 31.880465325), z_dir=(-0.4999999999999991, -0.4999999999999991, -0.7071067811865488)), keep=Keep.TOP, mode=Mode.PRIVATE)
    fillet_2_piece_8 = fillet_2_piece_8a & fillet_2_piece_8b
    add(fillet_2_piece_8, mode=Mode.SUBTRACT)

    # Эскиз5 → Вырез-Вытянуть6 (cut, two sides: drawn at the far end of the back side and taken through both)
    with BuildSketch(Plane.ZY.offset(-18.634345212).offset(-CUT_EXTRUDE_6_DEPTH_BACK)):
        with Locations((-1, -0.2)):
            Rectangle(SKETCH_5_W, SKETCH_5_H)
    extrude(amount=CUT_EXTRUDE_6_DEPTH + CUT_EXTRUDE_6_DEPTH_BACK, mode=Mode.SUBTRACT)

    # Эскиз7 → Вырез-Вытянуть8 (cut)
    with BuildSketch(Plane(origin=(0, 0, -0.8), x_dir=(-1, 0, 0), z_dir=(0, 0, -1))):
        with Locations((0.115654788, 55.053901844)):
            Rectangle(SKETCH_7_W, SKETCH_7_H)
    extrude(amount=CUT_EXTRUDE_8_DEPTH, mode=Mode.SUBTRACT)

    # Эскиз8 → Вырез-Вытянуть9 (cut)
    with BuildSketch(Plane(origin=(0, 0, -0.8), x_dir=(-1, 0, 0), z_dir=(0, 0, -1))):
        with Locations((0.115654788, -56.788595988)):
            Rectangle(SKETCH_8_W, SKETCH_8_H)
    extrude(amount=CUT_EXTRUDE_9_DEPTH, mode=Mode.SUBTRACT)

    # Эскиз9 → Вырез-Вытянуть10 (cut)
    with BuildSketch(Plane(origin=(0, 0, -3), x_dir=(-1, 0, 0), z_dir=(0, 0, -1))):
        with Locations((0, 0.604946385)):
            Rectangle(SKETCH_9_W, SKETCH_9_H)
    extrude(amount=-CUT_EXTRUDE_10_DEPTH, mode=Mode.SUBTRACT)


solid = part_2.part
